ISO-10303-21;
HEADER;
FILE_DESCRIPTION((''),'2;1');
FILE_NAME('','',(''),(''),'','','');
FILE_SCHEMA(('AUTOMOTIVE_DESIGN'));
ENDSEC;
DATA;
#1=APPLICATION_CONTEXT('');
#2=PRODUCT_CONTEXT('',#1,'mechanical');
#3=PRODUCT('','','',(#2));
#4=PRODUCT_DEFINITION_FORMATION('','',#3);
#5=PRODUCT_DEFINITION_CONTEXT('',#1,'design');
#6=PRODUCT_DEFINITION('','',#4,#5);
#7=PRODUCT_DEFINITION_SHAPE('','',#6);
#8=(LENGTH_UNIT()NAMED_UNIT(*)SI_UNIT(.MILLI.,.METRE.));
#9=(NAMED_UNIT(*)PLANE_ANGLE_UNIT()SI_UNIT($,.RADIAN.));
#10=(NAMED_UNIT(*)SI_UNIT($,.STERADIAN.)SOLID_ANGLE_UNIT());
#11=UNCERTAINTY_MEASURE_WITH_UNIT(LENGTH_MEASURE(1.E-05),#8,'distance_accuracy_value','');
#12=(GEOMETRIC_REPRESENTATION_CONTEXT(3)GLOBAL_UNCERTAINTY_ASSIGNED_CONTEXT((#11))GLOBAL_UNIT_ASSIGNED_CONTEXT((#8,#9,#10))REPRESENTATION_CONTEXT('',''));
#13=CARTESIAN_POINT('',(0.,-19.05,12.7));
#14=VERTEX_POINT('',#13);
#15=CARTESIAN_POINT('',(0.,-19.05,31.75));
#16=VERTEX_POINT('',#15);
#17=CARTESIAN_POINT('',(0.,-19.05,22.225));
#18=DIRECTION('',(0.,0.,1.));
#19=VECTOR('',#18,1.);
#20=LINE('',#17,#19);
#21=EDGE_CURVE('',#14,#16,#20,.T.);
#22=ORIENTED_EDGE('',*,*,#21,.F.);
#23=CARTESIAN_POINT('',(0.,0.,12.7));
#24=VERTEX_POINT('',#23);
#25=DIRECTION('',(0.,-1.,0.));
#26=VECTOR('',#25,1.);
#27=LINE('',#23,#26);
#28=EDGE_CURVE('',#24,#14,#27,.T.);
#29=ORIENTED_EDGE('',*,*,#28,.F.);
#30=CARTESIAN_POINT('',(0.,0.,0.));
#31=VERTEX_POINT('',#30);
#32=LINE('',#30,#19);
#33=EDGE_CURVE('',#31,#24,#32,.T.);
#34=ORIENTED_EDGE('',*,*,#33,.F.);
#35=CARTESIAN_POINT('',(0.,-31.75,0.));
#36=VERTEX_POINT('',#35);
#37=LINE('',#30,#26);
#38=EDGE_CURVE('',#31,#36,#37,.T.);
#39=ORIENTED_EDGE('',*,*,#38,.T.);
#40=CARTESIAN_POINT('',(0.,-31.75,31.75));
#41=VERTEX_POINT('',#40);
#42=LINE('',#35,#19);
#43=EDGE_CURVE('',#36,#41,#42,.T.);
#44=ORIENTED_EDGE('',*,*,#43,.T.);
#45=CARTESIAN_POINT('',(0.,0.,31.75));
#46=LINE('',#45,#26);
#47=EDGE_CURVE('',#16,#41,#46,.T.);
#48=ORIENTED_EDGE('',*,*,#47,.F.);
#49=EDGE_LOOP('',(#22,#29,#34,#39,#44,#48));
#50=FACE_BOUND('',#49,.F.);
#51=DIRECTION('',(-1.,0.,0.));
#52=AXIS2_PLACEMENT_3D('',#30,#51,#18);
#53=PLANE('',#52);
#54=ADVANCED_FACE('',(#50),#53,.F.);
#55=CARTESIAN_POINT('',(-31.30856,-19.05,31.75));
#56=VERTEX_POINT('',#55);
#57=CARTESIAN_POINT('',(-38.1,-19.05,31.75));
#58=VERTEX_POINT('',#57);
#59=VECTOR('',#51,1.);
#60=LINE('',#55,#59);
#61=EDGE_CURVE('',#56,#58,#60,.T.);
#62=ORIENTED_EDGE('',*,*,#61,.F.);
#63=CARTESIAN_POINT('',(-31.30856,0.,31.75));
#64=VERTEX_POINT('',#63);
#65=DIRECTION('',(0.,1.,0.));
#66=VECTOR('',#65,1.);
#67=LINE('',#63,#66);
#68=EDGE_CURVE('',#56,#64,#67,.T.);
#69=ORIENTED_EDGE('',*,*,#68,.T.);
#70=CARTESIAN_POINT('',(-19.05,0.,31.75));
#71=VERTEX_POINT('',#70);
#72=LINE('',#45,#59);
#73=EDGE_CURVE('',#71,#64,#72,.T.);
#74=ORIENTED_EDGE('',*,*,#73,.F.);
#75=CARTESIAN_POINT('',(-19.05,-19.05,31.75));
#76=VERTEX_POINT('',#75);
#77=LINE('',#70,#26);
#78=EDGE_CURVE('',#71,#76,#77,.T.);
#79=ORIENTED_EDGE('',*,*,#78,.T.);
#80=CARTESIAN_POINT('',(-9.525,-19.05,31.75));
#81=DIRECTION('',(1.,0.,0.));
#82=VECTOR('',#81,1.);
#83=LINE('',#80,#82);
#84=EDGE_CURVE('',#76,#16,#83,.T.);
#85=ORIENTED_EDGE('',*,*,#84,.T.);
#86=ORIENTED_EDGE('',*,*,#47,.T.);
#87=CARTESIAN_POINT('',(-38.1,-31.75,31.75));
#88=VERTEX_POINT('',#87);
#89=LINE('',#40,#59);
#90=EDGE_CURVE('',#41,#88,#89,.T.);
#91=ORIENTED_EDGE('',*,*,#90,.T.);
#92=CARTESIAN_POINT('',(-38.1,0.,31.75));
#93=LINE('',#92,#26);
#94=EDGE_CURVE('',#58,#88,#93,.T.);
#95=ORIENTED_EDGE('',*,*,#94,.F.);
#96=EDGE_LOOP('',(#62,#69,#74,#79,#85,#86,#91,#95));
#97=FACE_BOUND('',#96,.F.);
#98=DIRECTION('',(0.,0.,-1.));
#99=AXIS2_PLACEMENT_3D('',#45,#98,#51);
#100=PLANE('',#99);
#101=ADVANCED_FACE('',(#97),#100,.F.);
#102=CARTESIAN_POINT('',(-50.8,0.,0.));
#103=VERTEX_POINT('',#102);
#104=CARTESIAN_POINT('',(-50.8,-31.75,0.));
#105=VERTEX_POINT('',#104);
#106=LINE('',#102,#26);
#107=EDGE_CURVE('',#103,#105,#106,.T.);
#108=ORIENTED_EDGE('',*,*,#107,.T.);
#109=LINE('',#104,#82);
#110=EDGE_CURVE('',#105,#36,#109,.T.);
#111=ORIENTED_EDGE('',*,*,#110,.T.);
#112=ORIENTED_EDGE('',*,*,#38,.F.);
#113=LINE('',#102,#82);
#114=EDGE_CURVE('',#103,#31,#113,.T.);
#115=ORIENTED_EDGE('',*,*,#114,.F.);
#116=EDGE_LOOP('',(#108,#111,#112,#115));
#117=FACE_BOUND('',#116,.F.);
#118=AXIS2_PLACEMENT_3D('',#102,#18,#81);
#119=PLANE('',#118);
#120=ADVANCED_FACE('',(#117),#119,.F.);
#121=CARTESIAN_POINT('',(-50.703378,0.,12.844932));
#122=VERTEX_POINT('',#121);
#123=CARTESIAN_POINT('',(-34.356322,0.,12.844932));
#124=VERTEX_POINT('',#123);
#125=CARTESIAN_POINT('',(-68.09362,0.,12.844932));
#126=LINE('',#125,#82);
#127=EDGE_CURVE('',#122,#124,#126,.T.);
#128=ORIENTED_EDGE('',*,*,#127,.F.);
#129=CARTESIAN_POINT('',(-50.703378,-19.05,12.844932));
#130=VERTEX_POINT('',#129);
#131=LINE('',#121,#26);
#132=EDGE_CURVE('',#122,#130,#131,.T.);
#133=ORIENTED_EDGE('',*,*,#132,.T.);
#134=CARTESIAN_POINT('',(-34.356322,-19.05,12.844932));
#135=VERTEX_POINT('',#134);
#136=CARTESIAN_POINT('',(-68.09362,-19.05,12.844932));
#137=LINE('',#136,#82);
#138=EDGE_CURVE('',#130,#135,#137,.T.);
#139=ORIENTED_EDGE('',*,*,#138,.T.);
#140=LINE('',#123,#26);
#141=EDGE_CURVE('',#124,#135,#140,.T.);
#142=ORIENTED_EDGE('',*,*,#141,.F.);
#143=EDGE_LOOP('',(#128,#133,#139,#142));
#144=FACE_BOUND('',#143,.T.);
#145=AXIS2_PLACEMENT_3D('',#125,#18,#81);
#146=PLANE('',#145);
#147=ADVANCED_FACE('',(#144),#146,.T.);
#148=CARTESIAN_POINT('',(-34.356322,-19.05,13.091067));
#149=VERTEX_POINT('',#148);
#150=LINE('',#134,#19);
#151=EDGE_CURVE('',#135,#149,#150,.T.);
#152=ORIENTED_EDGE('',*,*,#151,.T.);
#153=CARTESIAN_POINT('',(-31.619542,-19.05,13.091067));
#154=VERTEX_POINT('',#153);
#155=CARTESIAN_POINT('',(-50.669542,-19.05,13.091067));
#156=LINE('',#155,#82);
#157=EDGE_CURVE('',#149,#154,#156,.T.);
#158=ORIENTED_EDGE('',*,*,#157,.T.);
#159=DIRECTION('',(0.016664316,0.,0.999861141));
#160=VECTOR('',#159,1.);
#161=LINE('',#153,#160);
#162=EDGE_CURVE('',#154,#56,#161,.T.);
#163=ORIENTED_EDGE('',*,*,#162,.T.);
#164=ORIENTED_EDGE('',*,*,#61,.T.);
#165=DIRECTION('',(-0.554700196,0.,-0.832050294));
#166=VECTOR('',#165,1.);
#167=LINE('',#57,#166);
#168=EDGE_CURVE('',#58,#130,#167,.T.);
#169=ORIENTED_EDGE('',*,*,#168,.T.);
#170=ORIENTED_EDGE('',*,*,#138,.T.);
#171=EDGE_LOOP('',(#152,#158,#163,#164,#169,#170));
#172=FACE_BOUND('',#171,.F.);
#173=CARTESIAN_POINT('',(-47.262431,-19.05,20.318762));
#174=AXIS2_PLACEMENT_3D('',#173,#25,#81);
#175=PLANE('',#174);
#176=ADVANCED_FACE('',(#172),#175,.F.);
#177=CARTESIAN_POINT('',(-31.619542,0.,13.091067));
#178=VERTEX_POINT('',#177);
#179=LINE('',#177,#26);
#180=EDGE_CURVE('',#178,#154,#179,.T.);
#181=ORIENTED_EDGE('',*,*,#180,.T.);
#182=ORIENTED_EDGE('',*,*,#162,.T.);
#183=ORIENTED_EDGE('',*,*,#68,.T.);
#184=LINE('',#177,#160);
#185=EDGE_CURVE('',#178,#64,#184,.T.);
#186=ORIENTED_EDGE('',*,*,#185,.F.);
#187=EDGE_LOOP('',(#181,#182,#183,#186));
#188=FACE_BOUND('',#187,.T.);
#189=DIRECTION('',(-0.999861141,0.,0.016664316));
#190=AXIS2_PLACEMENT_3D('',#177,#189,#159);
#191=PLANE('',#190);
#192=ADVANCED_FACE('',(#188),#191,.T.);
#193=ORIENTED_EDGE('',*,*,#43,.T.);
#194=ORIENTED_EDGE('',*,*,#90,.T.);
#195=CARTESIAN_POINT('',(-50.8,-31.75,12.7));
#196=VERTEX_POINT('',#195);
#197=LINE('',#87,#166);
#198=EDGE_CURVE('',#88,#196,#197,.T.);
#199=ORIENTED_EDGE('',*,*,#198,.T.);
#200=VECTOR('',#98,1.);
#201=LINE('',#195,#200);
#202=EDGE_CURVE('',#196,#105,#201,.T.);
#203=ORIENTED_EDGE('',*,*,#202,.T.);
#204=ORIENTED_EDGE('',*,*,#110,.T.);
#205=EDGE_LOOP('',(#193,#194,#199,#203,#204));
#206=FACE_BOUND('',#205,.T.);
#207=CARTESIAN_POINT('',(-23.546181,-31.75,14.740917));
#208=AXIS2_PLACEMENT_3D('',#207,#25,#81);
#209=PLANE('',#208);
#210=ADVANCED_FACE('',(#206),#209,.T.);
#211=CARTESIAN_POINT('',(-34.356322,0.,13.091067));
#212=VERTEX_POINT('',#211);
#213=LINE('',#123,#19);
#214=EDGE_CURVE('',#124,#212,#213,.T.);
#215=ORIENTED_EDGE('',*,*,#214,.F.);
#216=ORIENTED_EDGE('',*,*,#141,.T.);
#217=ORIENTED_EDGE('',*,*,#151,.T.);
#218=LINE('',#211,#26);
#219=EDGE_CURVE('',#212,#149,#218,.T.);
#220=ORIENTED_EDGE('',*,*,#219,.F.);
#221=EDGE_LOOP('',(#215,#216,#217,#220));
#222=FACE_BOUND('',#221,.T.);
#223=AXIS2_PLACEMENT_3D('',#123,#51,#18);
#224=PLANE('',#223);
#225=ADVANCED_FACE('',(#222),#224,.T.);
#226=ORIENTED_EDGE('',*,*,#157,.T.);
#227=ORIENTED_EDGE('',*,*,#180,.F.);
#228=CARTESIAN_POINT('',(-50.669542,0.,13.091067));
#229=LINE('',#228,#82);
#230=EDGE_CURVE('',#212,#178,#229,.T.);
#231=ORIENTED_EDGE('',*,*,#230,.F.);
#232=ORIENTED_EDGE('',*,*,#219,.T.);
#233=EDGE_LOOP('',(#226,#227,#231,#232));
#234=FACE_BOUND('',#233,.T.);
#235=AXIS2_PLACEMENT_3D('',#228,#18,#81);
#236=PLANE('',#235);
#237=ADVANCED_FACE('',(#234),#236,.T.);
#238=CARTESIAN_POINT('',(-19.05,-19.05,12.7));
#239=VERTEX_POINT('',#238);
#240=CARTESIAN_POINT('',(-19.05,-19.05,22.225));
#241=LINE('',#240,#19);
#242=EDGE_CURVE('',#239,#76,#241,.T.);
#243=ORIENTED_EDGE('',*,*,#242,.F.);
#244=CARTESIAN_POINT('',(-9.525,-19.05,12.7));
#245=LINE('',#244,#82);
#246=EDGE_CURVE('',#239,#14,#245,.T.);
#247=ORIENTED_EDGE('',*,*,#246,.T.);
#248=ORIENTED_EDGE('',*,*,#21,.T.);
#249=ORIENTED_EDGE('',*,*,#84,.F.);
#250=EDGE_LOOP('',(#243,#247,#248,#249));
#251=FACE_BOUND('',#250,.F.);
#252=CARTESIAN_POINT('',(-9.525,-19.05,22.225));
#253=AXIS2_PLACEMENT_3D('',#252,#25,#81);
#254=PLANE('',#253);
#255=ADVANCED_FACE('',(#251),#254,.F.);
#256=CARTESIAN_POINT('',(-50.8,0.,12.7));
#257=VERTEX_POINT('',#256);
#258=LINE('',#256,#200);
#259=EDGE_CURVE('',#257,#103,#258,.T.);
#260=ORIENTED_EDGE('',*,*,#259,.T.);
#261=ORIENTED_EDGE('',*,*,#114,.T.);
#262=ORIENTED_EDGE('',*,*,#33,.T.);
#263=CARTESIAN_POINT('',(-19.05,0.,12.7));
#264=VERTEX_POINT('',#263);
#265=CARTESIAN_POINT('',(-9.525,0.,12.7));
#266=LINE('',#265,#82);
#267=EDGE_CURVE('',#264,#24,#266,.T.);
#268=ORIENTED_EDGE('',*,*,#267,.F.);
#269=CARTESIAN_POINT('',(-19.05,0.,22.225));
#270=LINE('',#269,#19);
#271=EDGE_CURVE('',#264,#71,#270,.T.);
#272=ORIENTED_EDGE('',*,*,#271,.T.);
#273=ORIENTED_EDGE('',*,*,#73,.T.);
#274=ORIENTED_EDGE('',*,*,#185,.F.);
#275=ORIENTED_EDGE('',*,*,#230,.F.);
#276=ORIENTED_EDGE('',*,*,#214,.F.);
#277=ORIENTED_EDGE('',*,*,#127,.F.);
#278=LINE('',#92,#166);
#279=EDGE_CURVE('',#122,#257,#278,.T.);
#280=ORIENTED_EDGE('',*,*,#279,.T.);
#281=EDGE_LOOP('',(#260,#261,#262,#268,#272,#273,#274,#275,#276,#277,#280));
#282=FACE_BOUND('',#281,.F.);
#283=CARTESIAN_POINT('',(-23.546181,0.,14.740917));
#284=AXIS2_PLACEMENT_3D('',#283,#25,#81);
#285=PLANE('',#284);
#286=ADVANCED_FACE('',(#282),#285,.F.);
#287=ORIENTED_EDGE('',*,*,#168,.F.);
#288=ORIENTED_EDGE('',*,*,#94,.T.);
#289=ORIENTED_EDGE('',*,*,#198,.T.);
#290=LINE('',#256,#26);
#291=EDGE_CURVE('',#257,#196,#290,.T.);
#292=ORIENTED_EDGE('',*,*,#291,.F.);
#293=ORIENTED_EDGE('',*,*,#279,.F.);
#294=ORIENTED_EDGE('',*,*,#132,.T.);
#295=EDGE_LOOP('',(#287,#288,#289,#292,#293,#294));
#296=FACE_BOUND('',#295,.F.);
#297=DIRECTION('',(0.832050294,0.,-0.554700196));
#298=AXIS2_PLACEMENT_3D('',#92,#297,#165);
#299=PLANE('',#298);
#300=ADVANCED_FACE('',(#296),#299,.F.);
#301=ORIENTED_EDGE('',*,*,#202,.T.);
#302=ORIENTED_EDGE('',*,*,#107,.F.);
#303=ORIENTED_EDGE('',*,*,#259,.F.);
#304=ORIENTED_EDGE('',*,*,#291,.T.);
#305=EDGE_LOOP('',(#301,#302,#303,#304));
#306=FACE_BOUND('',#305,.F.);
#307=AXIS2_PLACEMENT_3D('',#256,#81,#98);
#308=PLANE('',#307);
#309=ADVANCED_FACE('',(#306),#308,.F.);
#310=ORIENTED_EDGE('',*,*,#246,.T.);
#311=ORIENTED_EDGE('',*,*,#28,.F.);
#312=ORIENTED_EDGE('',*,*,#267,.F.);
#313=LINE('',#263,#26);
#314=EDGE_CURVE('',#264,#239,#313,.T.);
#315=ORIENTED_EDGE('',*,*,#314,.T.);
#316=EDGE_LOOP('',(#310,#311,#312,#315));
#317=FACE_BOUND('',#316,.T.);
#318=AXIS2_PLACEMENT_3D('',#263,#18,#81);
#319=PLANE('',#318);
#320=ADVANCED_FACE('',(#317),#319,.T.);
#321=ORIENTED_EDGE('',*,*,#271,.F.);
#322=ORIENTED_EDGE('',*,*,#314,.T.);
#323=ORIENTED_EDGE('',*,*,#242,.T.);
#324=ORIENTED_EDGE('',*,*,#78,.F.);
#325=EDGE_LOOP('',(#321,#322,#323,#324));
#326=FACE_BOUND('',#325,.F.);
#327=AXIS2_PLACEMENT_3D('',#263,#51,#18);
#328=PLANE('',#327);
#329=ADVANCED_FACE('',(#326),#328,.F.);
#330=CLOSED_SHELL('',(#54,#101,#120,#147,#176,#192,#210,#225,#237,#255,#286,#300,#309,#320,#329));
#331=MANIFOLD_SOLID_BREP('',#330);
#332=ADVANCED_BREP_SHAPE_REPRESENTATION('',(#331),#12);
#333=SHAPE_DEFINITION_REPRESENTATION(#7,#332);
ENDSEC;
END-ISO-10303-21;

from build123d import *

# Parameters (mm, degrees)
F1_DEPTH = 31.75
F2_W     = 19.05
F2_H     = 19.05
F3_DEPTH = 19.05
F5_DEPTH = 19.05
F7_DEPTH = 19.05


# Not quite as in the source:
# - a length typed as a fraction of an inch, garbled in the dataset ("3 / 203.2 mm" for 3/8 in), is restored


with BuildPart() as f1:
    # F0 (on Front) → F1 (new body)
    with BuildSketch(Plane.XZ):
        Polygon((-50.8, 0), (0, 0), (0, 31.75), (-38.1, 31.75), (-50.8, 12.7), align=None)
    extrude(amount=F1_DEPTH)

    # F2 (on Front) → F3 (cut)
    with BuildSketch(Plane.XZ):
        with Locations((-9.525, 22.225)):
            Rectangle(F2_W, F2_H)
    extrude(amount=F3_DEPTH, mode=Mode.SUBTRACT)

    # F4 (on Front) → F5 (cut)
    with BuildSketch(Plane.XZ):
        Polygon((-31.6195416782, 13.0910674021), (-31.3020864666, 32.1384221315), (-37.6520864666, 32.1384221315), (-50.6695416782, 13.0910674021), align=None)
    extrude(amount=F5_DEPTH, mode=Mode.SUBTRACT)

    # F6 (on Front) → F7 (cut)
    with BuildSketch(Plane.XZ):
        Polygon((-34.3563221395, 12.8449322656), (-34.3563221395, 35.7176738393), (-68.0936202407, 12.8449322656), align=None)
    extrude(amount=F7_DEPTH, mode=Mode.SUBTRACT)


solid = f1.part
